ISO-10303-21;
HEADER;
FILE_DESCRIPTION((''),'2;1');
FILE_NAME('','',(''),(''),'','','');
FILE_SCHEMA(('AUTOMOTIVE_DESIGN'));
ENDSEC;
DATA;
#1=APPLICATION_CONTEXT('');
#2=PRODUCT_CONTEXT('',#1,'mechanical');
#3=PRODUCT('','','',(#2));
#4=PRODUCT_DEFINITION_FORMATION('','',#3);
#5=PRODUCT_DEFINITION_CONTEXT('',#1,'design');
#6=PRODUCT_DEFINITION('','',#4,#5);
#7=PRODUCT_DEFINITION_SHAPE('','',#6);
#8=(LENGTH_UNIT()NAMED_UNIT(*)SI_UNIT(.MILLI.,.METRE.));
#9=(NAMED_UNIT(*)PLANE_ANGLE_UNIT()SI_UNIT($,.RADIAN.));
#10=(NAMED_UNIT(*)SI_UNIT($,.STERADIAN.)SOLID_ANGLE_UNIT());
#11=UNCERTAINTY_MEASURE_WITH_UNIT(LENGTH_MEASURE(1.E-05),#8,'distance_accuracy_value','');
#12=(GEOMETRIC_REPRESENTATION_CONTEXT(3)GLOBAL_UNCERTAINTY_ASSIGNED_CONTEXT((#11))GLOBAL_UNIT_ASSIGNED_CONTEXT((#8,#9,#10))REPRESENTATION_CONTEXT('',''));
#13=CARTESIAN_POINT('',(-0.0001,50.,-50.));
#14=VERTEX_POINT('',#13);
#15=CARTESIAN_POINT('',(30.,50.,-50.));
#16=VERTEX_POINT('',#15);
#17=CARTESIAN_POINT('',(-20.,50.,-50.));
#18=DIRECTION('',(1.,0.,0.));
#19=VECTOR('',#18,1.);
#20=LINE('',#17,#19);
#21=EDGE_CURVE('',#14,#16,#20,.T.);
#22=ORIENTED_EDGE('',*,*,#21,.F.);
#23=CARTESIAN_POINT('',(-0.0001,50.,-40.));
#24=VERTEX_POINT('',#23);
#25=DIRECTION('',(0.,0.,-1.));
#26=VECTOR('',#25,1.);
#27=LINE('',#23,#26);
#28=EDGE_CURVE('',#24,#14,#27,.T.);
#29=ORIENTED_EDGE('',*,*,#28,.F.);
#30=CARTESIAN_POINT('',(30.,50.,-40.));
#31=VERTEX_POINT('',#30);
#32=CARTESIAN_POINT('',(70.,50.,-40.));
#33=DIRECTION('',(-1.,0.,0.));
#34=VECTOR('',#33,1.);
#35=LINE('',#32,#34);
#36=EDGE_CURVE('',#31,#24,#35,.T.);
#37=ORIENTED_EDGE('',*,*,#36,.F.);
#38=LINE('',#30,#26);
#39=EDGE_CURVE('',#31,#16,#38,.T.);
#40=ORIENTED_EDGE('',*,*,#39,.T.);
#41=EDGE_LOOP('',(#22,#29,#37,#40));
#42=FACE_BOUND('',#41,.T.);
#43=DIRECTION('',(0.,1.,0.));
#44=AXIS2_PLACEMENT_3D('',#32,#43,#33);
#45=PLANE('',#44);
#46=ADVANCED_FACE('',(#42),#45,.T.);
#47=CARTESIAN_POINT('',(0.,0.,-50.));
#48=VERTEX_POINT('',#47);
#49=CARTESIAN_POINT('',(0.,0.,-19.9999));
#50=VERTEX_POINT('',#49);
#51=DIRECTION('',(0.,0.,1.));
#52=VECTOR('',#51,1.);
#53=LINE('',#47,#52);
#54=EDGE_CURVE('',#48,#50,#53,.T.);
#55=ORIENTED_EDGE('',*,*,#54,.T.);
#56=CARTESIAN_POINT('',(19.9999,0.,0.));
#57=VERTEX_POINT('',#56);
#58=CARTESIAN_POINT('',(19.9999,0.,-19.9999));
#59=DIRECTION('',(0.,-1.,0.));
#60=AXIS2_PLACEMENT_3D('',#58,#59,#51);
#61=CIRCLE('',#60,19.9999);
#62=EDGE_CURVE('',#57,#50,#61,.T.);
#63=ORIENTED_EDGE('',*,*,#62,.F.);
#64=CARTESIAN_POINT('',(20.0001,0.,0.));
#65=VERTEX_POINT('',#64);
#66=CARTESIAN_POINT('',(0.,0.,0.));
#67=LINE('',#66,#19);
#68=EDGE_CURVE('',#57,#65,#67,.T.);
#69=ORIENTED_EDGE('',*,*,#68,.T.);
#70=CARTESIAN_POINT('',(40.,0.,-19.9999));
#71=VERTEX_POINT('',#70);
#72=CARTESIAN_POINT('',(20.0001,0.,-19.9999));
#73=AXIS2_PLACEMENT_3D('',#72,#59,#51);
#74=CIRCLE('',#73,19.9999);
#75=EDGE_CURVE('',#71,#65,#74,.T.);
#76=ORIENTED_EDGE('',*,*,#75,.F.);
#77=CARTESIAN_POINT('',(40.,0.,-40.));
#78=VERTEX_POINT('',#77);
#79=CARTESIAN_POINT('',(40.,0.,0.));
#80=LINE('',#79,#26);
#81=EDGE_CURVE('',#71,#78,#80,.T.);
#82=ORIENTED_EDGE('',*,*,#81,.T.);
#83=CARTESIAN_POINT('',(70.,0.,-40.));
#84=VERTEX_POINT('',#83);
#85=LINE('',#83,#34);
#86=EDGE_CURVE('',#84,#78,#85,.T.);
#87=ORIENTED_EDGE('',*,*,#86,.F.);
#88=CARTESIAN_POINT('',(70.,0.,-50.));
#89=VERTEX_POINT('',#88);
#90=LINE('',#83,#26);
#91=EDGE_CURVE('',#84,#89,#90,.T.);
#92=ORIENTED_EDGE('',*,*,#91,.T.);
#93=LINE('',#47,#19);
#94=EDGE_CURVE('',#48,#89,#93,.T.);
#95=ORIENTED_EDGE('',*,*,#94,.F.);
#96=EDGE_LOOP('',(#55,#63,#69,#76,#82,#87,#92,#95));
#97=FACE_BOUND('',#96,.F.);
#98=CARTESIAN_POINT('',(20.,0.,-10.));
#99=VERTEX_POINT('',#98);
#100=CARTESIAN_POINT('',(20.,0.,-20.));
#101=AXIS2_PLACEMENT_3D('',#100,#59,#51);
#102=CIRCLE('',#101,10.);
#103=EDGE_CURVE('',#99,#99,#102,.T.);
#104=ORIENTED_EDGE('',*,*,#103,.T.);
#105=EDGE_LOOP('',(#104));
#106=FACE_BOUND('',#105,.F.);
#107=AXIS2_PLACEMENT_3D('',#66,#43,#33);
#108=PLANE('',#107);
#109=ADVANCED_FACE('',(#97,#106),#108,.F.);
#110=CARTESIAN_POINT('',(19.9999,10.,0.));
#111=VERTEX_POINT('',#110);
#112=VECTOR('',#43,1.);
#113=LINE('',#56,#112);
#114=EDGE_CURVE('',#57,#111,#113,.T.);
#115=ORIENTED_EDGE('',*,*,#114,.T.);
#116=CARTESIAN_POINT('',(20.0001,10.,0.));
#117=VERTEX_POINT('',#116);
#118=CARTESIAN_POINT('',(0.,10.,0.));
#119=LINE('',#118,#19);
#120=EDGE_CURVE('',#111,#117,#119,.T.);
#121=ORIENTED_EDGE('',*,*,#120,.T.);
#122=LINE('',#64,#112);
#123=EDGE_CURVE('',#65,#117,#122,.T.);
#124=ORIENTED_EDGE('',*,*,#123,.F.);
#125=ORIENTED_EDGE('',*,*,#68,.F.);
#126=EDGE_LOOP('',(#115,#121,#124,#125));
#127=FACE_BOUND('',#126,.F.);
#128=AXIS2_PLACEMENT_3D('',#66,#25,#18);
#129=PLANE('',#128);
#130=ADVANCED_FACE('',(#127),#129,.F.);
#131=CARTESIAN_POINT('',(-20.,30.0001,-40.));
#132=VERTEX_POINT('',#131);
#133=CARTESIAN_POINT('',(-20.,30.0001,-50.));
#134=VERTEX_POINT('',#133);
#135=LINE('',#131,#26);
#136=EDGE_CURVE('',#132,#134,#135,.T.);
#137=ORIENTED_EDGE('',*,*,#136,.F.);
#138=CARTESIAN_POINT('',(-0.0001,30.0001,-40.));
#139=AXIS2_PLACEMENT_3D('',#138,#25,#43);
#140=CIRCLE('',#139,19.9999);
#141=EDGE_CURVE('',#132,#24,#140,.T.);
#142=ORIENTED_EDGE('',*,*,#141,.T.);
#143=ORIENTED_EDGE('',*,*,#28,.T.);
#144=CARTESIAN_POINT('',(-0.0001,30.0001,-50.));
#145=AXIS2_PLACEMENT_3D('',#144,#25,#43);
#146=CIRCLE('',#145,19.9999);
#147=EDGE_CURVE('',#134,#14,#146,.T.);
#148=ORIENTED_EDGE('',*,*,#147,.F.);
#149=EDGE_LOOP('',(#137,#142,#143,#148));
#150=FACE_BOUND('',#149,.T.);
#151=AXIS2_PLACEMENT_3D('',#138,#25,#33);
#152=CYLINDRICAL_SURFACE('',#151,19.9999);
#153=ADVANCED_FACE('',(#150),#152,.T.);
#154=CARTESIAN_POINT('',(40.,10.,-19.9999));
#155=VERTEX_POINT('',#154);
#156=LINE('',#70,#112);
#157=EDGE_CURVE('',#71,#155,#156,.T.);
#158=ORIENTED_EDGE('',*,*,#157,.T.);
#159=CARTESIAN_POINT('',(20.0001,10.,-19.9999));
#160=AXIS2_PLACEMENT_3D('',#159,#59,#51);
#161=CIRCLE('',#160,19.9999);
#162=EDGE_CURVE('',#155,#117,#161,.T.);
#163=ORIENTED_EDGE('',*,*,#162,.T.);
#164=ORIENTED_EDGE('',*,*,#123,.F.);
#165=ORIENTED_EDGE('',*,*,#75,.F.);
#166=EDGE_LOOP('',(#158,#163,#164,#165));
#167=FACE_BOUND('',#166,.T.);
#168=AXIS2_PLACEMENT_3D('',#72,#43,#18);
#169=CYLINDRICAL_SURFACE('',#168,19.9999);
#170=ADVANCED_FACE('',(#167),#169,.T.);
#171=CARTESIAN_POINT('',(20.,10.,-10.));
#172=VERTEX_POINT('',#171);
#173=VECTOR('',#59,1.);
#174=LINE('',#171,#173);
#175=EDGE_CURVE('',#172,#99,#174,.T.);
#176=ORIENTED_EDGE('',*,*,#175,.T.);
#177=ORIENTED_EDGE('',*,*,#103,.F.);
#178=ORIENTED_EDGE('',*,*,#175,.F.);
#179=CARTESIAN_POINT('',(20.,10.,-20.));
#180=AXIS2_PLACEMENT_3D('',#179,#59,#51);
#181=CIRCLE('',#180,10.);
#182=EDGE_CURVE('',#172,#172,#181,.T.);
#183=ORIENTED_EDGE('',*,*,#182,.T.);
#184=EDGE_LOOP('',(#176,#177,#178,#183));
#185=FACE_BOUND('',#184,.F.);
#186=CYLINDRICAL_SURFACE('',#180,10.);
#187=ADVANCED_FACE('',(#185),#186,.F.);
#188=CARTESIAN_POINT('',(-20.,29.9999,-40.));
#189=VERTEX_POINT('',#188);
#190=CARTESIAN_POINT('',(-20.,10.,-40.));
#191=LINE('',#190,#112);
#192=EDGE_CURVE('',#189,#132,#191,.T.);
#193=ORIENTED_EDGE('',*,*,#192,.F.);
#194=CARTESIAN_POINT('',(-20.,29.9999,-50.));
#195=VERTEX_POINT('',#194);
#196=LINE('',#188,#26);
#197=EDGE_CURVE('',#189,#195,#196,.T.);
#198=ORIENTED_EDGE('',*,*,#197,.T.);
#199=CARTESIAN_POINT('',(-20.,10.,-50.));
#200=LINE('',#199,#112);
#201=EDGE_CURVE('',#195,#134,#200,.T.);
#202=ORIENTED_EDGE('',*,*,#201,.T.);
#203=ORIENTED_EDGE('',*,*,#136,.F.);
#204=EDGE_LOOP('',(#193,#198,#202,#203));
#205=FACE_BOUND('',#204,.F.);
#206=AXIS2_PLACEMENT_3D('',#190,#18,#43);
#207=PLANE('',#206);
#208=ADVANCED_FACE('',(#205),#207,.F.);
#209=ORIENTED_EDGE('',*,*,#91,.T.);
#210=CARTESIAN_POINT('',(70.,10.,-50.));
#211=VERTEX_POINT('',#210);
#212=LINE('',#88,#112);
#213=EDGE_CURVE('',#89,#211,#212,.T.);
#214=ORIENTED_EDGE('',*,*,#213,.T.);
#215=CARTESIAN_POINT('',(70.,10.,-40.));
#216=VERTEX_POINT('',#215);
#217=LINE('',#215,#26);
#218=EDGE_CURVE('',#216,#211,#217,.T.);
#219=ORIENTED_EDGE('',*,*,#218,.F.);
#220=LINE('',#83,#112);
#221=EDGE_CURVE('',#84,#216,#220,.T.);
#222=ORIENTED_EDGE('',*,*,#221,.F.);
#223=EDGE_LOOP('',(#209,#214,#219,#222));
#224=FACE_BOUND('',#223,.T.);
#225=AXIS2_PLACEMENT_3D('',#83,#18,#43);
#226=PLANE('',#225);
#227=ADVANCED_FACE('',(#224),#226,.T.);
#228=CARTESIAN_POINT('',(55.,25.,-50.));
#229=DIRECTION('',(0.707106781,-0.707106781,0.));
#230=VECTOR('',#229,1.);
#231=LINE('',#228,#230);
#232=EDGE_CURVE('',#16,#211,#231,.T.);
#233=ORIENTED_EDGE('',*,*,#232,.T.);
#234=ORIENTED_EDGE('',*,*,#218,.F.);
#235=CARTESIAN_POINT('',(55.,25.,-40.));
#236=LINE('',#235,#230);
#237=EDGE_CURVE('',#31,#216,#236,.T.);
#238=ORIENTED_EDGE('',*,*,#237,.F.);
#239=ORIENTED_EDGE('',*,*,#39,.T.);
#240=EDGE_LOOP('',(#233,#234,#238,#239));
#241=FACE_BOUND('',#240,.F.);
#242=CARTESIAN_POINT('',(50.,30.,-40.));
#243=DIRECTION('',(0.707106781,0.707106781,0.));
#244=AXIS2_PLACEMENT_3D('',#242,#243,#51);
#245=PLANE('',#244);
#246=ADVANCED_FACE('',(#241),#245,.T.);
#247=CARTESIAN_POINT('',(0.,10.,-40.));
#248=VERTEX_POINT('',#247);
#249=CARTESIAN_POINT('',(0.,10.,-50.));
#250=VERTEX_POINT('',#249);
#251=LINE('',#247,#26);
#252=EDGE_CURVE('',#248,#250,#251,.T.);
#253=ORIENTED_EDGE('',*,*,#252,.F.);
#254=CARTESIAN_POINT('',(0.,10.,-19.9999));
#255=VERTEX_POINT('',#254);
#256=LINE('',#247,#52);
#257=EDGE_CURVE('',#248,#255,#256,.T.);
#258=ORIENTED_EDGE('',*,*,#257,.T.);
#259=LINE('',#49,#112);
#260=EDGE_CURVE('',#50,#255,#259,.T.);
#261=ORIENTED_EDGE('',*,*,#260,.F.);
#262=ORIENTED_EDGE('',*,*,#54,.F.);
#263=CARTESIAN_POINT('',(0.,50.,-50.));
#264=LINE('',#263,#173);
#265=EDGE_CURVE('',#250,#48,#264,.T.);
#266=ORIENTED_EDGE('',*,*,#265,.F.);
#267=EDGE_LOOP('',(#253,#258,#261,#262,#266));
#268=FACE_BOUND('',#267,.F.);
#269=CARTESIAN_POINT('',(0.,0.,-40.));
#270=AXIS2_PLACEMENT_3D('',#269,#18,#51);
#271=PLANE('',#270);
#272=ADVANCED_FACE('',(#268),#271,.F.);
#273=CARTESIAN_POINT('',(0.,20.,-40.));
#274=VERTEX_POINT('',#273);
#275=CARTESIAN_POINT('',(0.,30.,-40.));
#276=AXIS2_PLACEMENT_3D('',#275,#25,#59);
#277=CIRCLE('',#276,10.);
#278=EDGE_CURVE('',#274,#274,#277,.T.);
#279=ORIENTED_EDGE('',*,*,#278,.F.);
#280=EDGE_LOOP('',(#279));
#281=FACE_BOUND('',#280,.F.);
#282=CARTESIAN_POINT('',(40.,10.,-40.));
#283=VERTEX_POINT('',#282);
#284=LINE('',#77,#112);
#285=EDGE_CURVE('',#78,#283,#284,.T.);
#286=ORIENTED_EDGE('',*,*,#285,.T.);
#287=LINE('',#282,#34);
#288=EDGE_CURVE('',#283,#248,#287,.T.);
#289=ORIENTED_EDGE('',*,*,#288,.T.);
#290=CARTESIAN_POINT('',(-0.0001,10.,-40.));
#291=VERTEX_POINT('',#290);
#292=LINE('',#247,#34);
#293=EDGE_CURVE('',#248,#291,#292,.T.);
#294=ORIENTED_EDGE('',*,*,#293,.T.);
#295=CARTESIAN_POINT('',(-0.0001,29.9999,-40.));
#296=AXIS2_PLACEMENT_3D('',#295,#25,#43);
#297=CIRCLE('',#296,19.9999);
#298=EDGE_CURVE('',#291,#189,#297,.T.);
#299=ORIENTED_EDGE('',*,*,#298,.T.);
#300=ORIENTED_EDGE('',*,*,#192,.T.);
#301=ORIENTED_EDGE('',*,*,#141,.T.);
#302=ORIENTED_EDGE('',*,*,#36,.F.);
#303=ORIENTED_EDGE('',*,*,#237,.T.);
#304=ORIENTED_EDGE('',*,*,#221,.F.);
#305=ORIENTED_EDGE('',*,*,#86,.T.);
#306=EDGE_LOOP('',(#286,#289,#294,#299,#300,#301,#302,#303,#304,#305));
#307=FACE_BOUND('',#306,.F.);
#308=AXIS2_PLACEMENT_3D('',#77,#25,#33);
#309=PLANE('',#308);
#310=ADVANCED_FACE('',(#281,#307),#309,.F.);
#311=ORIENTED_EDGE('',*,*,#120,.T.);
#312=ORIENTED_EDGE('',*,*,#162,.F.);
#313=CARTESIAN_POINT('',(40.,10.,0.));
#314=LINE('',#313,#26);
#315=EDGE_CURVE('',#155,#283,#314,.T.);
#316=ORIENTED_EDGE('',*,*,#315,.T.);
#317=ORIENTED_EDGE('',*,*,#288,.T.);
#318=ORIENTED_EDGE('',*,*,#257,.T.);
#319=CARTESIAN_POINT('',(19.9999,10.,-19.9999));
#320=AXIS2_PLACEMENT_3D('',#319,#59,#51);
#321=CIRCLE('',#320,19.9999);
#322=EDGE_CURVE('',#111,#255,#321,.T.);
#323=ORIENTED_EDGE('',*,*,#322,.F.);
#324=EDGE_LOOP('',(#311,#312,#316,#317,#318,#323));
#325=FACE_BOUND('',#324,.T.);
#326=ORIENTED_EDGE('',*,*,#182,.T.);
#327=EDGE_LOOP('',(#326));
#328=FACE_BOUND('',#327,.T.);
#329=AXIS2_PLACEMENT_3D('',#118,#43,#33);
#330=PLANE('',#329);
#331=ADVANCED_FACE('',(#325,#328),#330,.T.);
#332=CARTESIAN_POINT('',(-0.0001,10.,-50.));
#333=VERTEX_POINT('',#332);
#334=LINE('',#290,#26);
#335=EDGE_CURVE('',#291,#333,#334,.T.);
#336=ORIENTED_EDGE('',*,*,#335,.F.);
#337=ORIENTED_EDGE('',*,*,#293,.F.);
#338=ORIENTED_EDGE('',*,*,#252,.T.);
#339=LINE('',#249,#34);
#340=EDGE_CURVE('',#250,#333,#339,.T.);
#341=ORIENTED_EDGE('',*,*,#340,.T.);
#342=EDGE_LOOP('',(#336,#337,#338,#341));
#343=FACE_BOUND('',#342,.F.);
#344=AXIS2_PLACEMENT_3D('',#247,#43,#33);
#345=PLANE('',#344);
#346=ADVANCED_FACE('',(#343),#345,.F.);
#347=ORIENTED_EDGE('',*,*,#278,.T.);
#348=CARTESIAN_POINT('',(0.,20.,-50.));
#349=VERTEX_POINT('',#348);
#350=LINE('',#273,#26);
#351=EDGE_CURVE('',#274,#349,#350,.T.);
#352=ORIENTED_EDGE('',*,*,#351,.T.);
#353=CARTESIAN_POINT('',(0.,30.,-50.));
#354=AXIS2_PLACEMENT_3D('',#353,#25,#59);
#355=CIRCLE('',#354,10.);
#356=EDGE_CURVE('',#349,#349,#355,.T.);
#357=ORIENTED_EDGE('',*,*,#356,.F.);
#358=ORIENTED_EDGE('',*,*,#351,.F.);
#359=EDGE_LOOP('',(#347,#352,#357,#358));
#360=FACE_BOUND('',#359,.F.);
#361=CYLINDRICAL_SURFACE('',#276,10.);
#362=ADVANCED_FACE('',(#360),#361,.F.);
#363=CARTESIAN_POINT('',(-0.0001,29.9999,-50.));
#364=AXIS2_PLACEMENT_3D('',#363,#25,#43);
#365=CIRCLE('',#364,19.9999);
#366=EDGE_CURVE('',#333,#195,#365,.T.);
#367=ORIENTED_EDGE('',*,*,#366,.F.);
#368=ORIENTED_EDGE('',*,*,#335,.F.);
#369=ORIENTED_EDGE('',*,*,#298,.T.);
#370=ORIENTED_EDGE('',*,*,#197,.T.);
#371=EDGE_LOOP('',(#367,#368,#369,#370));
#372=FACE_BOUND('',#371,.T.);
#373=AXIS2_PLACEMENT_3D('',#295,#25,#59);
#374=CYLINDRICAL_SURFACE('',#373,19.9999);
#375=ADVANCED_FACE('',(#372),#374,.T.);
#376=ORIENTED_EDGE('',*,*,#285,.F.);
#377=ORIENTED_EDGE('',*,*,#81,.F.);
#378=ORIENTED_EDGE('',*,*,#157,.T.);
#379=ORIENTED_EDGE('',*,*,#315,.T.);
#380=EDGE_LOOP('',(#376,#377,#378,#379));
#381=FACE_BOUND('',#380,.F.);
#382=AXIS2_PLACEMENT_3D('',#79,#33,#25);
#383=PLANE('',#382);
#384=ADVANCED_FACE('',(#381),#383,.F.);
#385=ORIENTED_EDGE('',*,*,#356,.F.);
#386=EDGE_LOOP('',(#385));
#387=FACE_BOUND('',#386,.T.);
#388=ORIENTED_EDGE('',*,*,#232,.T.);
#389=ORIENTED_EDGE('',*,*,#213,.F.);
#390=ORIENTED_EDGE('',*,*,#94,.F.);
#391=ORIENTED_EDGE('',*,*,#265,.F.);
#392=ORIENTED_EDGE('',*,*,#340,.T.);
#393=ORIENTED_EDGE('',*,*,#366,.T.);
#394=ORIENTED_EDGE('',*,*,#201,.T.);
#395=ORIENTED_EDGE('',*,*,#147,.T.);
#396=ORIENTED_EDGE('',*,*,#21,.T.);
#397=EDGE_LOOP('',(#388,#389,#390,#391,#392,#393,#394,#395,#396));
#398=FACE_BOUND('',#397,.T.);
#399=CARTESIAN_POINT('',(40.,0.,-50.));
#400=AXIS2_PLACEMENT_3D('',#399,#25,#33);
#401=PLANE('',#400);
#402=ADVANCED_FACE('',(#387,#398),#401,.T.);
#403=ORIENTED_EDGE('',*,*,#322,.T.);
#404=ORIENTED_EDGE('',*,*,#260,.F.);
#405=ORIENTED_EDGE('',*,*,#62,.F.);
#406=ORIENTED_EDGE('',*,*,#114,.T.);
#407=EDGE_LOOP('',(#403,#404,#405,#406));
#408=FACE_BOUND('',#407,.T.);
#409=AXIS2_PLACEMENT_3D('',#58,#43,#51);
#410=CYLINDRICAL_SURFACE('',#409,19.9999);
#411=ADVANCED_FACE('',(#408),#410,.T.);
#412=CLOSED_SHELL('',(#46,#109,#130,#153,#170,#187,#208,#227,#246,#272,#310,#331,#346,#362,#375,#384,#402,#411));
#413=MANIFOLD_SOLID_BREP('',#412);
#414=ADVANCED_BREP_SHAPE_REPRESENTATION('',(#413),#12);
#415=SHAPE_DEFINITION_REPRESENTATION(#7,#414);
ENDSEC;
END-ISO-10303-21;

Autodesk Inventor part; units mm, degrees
ref_plane "YZ Plane" through (0, 0, 0) normal (1, 0, 0) x (0, 1, 0)
ref_plane "XZ Plane" through (0, 0, 0) normal (0, 1, 0) x (-1, 0, 0)
ref_plane "XY Plane" through (0, 0, 0) normal (0, 0, 1) x (1, 0, 0)
sketch "草圖1" plane through (0, 0, 0) normal (0, 1, 0) x (-1, 0, 0)
  line L0 (0, 0) -> (-40, 0)
  line L1 (-40, 0) -> (-40, -40)
  line L2 (-40, -40) -> (0, -40)
  line L3 (0, -40) -> (0, 0)
  dimension "d0" = 40
  dimension "d1" = 40
extrude "擠出1" add sketch "草圖1" along normal blind 10
sketch "草圖2" plane through (40, 0, -40) normal (0, 0, -1) x (-1, 0, 0)
  line L0 (40, 0) -> (0, 0) projected
  line L1 (40, 0) -> (-30, 0)
  line L2 (-30, 0) -> (-30, 50)
  line L3 (-30, 50) -> (40, 50)
  line L4 (40, 50) -> (40, 0)
  line L5 (40, 10) -> (0, 10) projected
  line L6 (40, 10) -> (60, 10)
  line L7 (60, 10) -> (60, 50)
  line L8 (60, 50) -> (40, 50)
  line L9 (40, 50) -> (40, 10)
  line L10 (0, 0) -> (0, 10) projected
  dimension "d4" = 40
  dimension "d5" = 30
  dimension "d6" = 20
extrude "擠出2" add sketch "草圖2" along normal blind 10
fillet "圓角1" radius 20 2 edges at (-20, 50, -45) (-20, 10, -45)
chamfer "倒角1" distance 40 angle 45 1 edges at (70, 50, -45)
fillet "圓角2" radius 20 2 edges at (0, 5, 0) (40, 5, 0)
hole "孔1" at (20, 10, -20) direction (0, -1, 0) diameter 20 depth 10 tip angle 118
hole "孔2" at (0, 30, -40) direction (0, 0, -1) diameter 20 depth 20 tip angle 118
properties part number "25"
